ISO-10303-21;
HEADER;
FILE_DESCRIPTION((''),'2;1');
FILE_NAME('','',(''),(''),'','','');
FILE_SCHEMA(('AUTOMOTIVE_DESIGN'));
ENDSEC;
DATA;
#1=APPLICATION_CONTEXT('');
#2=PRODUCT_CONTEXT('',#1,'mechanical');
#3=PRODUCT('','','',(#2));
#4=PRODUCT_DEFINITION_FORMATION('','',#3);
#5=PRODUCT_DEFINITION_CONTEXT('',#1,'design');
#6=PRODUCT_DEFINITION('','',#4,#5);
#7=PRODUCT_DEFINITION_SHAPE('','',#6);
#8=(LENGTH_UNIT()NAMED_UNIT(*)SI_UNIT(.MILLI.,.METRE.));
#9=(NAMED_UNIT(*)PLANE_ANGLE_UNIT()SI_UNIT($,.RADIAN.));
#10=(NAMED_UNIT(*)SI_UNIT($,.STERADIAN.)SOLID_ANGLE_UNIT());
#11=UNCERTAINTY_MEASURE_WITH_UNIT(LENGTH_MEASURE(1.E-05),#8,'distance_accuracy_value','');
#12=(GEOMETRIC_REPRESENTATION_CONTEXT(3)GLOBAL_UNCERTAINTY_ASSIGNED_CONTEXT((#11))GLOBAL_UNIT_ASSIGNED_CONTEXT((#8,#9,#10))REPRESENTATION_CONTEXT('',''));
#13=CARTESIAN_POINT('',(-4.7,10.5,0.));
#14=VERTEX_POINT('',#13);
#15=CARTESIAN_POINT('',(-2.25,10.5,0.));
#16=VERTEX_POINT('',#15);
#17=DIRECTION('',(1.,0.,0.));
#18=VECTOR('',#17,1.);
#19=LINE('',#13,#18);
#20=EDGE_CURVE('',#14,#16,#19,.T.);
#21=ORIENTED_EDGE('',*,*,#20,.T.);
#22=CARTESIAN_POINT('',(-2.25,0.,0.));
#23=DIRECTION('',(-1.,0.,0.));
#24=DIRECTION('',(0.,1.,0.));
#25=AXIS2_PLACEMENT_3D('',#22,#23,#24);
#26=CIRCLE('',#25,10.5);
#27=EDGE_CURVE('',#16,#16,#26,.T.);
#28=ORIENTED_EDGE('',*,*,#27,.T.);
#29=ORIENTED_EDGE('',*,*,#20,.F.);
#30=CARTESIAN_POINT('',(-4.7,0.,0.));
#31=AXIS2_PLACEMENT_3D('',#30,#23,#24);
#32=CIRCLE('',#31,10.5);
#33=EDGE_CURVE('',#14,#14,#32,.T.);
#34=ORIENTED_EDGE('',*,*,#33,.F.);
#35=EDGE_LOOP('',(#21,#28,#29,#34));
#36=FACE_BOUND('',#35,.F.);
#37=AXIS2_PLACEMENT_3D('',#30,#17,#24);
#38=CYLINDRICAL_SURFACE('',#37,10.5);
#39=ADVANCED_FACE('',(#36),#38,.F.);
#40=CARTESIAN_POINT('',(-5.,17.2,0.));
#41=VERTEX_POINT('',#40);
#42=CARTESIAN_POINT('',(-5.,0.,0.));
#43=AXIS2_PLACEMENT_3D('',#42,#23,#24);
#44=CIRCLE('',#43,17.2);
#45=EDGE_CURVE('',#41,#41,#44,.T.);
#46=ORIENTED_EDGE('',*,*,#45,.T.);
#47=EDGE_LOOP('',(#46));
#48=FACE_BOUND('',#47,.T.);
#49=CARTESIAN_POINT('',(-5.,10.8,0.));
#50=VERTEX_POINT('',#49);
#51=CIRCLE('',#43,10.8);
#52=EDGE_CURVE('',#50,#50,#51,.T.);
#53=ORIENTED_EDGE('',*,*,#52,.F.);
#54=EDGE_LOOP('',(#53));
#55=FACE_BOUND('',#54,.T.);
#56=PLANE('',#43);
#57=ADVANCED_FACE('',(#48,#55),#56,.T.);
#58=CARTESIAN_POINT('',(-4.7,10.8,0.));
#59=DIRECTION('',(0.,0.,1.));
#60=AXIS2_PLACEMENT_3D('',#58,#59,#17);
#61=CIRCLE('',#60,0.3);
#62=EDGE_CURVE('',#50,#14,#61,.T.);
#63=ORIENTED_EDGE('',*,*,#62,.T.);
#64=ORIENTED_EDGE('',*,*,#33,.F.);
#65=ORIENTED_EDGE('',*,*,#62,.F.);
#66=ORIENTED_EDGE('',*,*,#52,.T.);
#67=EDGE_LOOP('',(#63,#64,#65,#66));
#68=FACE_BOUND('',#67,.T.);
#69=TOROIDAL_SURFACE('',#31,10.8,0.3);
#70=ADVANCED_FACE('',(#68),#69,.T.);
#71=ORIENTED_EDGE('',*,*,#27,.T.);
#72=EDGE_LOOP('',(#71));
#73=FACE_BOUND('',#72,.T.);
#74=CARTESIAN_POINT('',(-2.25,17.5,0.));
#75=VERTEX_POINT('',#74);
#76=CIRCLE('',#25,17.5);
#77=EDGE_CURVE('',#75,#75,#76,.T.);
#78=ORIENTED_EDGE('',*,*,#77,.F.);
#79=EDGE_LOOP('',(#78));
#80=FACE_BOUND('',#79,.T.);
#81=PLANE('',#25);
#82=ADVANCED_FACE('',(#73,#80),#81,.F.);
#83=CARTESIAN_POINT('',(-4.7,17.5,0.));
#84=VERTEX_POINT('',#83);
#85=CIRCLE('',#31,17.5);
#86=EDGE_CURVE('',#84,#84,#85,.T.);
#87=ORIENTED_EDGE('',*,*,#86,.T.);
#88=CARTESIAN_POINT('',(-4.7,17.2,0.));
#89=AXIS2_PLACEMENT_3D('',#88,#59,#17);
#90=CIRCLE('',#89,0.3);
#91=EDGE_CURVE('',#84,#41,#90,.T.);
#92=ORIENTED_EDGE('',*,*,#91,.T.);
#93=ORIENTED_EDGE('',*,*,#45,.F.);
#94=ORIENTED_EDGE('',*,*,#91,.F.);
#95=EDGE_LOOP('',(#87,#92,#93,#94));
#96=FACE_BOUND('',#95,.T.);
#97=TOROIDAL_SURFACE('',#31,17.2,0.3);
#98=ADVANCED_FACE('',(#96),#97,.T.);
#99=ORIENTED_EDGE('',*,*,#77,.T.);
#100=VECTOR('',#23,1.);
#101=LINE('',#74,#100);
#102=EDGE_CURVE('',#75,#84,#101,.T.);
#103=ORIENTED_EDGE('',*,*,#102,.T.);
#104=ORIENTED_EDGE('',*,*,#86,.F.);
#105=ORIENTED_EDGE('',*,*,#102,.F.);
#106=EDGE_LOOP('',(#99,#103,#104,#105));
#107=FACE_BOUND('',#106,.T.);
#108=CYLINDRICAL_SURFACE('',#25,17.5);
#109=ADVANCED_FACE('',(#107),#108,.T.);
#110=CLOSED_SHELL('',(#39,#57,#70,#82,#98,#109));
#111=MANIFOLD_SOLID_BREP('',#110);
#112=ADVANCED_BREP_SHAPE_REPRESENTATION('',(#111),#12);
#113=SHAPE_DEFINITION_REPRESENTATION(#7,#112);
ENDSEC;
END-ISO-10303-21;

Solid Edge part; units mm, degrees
sketch "Sketch1" plane through (0, 0, 0) normal (0, 0, 1) x (1, 0, 0)
  arc A0 (-5, 10.8) -> (-4.7, 10.5) centre (-4.7, 10.8) ccw
  line L0 (-4.7, 10.5) -> (-2.25, 10.5)
  line L1 (-2.25, 10.5) -> (-2.25, 17.5)
  line L2 (-2.25, 17.5) -> (-4.7, 17.5)
  arc A1 (-4.7, 17.5) -> (-5, 17.2) centre (-4.7, 17.2) ccw
  line L3 (-5, 17.2) -> (-5, 10.8)
revolve "RevolvedProtrusion1" add sketch "Sketch1" angle 360 about axis through (-2.25, 0, 0) along (-1, 0, 0)
properties part number "SKF_81104 TN_PART2"
